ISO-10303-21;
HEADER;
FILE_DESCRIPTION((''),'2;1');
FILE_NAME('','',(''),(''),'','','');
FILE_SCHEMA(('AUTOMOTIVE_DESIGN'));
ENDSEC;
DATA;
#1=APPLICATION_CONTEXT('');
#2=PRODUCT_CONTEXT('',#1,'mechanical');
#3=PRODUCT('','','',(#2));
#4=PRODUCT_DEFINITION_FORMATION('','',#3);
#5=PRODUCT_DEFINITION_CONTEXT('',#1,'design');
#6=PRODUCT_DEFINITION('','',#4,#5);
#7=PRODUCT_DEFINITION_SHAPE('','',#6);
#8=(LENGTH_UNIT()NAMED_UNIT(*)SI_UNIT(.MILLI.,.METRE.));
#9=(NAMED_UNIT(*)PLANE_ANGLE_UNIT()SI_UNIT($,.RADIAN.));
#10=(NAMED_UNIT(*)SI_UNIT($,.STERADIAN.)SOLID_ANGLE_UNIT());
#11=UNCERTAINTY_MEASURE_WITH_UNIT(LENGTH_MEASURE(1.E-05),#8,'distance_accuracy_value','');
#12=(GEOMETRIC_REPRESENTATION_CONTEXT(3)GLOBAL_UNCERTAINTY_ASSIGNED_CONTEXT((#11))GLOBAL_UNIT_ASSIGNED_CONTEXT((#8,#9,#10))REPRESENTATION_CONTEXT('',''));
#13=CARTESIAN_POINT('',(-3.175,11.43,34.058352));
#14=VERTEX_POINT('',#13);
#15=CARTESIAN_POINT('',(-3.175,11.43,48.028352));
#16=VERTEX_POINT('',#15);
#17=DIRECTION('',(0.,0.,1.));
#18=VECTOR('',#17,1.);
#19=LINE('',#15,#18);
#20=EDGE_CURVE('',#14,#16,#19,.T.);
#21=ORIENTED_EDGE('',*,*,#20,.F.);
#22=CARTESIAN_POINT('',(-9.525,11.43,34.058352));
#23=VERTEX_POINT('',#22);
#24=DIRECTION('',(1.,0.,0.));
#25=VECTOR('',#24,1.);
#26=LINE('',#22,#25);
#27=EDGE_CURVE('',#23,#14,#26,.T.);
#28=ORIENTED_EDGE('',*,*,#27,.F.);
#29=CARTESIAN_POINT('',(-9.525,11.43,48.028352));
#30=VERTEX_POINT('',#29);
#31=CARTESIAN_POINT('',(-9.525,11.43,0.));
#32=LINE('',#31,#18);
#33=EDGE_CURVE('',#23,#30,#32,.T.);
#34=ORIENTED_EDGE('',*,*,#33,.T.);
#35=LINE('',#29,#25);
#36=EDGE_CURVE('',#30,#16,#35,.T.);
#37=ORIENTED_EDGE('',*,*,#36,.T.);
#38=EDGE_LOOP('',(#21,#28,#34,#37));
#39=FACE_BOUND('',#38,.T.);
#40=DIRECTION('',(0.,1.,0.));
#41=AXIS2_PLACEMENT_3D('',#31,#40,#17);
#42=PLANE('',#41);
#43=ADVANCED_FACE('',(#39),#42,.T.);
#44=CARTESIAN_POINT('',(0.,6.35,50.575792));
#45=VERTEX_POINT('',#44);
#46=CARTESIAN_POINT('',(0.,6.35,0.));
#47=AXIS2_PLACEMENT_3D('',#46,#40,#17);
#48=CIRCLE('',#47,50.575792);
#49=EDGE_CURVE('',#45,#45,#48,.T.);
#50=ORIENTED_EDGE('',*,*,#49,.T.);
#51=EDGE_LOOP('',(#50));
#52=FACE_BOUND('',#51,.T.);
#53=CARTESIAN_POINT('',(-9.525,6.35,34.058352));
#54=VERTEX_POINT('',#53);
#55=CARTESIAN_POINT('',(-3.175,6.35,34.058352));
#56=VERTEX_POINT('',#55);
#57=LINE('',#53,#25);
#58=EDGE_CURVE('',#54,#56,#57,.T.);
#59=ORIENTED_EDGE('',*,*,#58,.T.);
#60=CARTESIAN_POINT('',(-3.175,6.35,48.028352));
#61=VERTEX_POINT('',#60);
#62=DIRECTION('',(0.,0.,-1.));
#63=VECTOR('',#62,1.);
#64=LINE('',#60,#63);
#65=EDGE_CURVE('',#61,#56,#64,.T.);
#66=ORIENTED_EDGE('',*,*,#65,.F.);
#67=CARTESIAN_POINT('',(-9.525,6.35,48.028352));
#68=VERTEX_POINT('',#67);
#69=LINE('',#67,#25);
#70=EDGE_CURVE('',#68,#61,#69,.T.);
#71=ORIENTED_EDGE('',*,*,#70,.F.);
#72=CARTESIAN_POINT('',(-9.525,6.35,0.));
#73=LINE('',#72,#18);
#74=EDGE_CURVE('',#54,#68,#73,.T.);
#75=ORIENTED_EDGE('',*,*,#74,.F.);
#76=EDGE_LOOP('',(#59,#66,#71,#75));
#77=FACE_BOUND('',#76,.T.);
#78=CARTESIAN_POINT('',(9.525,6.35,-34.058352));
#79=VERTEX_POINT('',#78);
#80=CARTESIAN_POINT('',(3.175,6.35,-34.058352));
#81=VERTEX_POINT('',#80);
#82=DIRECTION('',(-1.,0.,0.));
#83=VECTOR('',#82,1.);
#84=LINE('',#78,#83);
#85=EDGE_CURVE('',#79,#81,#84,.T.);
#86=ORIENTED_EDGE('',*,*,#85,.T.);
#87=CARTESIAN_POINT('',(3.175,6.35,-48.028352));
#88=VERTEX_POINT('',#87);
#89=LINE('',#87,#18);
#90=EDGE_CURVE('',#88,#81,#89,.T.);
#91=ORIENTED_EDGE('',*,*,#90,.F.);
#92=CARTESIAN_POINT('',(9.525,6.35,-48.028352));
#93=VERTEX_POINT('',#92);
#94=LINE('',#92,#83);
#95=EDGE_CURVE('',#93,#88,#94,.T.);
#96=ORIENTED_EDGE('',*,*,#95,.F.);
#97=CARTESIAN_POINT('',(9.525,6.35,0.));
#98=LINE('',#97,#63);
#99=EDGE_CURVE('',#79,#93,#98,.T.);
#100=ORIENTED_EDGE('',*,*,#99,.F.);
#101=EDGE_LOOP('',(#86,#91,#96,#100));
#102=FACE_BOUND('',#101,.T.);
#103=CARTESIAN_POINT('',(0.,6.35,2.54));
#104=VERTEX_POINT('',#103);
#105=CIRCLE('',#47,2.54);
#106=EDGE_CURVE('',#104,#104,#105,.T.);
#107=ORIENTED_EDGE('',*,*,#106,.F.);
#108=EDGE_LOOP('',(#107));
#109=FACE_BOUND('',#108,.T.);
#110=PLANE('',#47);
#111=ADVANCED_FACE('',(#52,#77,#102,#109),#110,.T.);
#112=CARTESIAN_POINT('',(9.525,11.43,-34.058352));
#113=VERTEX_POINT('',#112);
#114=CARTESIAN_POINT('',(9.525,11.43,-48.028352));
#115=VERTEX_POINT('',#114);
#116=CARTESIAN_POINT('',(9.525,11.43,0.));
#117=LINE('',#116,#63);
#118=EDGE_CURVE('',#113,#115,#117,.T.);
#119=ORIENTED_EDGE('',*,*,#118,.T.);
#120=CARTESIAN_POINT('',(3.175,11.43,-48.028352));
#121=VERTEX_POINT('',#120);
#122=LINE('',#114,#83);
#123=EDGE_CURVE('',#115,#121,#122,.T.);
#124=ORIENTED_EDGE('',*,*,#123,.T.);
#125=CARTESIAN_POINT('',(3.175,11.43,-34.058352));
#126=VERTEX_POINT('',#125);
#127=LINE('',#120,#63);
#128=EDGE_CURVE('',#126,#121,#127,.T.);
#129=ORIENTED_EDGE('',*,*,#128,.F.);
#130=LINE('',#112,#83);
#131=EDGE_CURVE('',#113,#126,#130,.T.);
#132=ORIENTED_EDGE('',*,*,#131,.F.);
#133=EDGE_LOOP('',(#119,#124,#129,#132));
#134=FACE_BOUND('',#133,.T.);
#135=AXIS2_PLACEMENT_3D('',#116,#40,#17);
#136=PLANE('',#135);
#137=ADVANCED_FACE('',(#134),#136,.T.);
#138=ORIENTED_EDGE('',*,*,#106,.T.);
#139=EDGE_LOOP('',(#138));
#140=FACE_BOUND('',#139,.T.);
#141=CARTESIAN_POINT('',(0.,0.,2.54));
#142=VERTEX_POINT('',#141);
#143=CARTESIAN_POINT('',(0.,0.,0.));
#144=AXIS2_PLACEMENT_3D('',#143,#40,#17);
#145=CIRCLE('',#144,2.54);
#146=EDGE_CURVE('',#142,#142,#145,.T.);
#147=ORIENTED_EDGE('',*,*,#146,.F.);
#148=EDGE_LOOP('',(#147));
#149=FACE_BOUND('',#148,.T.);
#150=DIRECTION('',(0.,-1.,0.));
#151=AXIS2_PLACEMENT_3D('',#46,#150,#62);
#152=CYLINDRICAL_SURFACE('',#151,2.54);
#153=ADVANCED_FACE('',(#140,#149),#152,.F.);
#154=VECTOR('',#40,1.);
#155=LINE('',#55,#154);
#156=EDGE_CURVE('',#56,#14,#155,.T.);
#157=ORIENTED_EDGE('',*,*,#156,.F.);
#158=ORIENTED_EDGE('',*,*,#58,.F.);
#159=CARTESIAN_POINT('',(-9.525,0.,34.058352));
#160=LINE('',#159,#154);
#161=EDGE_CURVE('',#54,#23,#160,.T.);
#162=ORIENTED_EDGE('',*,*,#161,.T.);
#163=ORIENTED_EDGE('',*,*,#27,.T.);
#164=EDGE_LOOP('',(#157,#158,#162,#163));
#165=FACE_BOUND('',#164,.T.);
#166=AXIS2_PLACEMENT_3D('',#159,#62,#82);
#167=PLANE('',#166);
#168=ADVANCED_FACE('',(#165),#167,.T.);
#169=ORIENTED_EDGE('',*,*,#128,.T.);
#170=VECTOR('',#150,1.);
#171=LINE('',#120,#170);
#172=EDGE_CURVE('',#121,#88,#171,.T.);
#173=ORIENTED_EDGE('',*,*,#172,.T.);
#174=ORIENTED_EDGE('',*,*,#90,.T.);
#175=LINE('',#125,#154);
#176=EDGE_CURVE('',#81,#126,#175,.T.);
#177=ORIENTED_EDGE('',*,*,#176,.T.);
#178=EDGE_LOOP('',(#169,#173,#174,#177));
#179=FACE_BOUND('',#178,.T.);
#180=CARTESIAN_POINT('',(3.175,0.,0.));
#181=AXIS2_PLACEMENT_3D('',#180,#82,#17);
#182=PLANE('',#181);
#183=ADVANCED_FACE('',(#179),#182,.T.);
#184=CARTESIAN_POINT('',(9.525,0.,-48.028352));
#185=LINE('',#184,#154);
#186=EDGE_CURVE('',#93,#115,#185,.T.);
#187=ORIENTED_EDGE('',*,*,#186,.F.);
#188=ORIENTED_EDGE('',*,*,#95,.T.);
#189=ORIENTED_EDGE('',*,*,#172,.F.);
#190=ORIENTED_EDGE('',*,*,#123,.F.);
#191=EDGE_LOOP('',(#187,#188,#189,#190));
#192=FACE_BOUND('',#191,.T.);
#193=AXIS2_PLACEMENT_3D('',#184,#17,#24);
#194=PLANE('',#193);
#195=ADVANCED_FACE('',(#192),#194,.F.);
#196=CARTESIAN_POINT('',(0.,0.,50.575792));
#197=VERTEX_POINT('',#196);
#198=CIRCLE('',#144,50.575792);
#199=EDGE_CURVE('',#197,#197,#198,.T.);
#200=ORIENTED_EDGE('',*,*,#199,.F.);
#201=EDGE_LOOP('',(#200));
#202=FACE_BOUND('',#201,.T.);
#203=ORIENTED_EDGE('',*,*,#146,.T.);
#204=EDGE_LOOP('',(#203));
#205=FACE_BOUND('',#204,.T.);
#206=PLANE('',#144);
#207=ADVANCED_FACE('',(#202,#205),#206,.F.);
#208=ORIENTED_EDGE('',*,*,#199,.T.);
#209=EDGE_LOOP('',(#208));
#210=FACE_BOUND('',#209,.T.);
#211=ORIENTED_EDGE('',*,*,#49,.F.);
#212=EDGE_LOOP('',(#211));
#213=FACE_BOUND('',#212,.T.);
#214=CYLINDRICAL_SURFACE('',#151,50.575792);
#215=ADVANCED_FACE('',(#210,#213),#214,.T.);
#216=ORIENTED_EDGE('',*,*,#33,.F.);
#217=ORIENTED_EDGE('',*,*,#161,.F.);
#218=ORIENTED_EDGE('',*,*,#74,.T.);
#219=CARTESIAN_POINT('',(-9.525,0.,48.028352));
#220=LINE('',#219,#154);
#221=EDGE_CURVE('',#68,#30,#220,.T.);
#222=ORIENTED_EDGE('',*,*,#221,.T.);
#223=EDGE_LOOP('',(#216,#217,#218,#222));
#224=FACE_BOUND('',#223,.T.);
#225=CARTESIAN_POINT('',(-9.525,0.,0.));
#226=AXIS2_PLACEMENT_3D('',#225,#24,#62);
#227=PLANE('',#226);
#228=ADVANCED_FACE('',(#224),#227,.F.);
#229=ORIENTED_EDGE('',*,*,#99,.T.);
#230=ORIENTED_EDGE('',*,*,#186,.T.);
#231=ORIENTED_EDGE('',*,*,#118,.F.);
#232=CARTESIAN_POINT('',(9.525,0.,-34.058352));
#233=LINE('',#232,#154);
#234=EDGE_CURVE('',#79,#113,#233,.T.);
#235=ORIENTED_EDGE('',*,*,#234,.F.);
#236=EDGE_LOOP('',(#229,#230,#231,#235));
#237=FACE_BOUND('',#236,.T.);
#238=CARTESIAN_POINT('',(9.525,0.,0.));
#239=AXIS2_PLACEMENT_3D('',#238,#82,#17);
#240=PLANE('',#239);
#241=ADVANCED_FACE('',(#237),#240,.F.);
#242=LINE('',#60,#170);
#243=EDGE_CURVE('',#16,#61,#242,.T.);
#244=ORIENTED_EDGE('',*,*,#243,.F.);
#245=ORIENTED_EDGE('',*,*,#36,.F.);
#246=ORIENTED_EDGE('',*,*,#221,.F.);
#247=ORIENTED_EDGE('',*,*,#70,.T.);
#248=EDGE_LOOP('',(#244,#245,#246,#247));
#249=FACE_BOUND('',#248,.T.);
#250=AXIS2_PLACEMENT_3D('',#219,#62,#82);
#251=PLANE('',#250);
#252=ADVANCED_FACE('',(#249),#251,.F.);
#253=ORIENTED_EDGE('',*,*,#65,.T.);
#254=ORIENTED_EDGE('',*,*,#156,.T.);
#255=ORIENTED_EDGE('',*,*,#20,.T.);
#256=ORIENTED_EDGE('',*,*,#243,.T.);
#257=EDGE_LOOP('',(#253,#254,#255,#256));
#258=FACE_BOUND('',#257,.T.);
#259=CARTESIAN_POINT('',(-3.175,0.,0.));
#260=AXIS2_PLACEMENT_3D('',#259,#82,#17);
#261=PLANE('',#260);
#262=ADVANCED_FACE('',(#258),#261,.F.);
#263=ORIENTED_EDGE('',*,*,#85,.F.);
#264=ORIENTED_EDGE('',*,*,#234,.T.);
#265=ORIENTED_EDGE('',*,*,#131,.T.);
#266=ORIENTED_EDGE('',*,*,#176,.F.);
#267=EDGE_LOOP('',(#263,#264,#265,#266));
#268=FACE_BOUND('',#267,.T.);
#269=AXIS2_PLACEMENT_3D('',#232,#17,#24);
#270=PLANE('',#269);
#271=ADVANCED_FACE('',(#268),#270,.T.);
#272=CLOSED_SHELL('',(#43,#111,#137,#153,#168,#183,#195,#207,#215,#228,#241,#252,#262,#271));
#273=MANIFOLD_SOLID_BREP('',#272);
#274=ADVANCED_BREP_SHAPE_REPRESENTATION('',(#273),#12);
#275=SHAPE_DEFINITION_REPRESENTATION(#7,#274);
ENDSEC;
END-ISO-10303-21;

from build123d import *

# Parameters (mm, degrees)
SKETCH1_R           = 50.575792326
SKETCH1_R_2         = 2.54
BOSS_EXTRUDE1_DEPTH = 6.35
SKETCH2_W           = 13.97
SKETCH2_H           = 5.08
BOSS_EXTRUDE3_DEPTH = 9.525
SKETCH3_W           = 13.97
SKETCH3_H           = 5.08
CUT_EXTRUDE1_DEPTH  = 3.175
CIRPATTERN2_COUNT   = 2
SKETCH4_W           = 13.97
SKETCH4_H           = 5.08
CUT_EXTRUDE2_DEPTH  = 3.175


with BuildPart() as part:
    # Sketch1 → Boss-Extrude1 (new body)
    with BuildSketch(Plane(origin=(0, 0, 0), x_dir=(1, 0, 0), z_dir=(0, 1, 0))):
        Circle(SKETCH1_R)
        Circle(SKETCH1_R_2, mode=Mode.SUBTRACT)
    extrude(amount=BOSS_EXTRUDE1_DEPTH)

    # Sketch2 → Boss-Extrude3 (add)
    with BuildSketch(Plane(origin=(0, 0, 0), x_dir=(0, 0, -1), z_dir=(1, 0, 0))):
        with Locations((-41.043352, 8.89)):
            Rectangle(SKETCH2_W, SKETCH2_H)
    boss_extrude3 = extrude(amount=-BOSS_EXTRUDE3_DEPTH)

    # Sketch3 → Cut-Extrude1 (cut)
    with BuildSketch(Plane(origin=(0, 0, 0), x_dir=(0, 0, -1), z_dir=(1, 0, 0))):
        with Locations((-41.043352, 8.89)):
            Rectangle(SKETCH3_W, SKETCH3_H)
    extrude(amount=-CUT_EXTRUDE1_DEPTH, mode=Mode.SUBTRACT)

    # CirPattern2: Boss-Extrude3 ×2 about axis
    cirpattern2_axis = Axis((0, 6.35, 0), (0, 1, 0))
    for i in range(1, CIRPATTERN2_COUNT):
        add(boss_extrude3.rotate(cirpattern2_axis, i * 360 / CIRPATTERN2_COUNT))

    # Sketch4 → Cut-Extrude2 (cut)
    with BuildSketch(Plane.ZY):
        with Locations((-41.043352, 8.89)):
            Rectangle(SKETCH4_W, SKETCH4_H)
    extrude(amount=-CUT_EXTRUDE2_DEPTH, mode=Mode.SUBTRACT)


solid = part.part
